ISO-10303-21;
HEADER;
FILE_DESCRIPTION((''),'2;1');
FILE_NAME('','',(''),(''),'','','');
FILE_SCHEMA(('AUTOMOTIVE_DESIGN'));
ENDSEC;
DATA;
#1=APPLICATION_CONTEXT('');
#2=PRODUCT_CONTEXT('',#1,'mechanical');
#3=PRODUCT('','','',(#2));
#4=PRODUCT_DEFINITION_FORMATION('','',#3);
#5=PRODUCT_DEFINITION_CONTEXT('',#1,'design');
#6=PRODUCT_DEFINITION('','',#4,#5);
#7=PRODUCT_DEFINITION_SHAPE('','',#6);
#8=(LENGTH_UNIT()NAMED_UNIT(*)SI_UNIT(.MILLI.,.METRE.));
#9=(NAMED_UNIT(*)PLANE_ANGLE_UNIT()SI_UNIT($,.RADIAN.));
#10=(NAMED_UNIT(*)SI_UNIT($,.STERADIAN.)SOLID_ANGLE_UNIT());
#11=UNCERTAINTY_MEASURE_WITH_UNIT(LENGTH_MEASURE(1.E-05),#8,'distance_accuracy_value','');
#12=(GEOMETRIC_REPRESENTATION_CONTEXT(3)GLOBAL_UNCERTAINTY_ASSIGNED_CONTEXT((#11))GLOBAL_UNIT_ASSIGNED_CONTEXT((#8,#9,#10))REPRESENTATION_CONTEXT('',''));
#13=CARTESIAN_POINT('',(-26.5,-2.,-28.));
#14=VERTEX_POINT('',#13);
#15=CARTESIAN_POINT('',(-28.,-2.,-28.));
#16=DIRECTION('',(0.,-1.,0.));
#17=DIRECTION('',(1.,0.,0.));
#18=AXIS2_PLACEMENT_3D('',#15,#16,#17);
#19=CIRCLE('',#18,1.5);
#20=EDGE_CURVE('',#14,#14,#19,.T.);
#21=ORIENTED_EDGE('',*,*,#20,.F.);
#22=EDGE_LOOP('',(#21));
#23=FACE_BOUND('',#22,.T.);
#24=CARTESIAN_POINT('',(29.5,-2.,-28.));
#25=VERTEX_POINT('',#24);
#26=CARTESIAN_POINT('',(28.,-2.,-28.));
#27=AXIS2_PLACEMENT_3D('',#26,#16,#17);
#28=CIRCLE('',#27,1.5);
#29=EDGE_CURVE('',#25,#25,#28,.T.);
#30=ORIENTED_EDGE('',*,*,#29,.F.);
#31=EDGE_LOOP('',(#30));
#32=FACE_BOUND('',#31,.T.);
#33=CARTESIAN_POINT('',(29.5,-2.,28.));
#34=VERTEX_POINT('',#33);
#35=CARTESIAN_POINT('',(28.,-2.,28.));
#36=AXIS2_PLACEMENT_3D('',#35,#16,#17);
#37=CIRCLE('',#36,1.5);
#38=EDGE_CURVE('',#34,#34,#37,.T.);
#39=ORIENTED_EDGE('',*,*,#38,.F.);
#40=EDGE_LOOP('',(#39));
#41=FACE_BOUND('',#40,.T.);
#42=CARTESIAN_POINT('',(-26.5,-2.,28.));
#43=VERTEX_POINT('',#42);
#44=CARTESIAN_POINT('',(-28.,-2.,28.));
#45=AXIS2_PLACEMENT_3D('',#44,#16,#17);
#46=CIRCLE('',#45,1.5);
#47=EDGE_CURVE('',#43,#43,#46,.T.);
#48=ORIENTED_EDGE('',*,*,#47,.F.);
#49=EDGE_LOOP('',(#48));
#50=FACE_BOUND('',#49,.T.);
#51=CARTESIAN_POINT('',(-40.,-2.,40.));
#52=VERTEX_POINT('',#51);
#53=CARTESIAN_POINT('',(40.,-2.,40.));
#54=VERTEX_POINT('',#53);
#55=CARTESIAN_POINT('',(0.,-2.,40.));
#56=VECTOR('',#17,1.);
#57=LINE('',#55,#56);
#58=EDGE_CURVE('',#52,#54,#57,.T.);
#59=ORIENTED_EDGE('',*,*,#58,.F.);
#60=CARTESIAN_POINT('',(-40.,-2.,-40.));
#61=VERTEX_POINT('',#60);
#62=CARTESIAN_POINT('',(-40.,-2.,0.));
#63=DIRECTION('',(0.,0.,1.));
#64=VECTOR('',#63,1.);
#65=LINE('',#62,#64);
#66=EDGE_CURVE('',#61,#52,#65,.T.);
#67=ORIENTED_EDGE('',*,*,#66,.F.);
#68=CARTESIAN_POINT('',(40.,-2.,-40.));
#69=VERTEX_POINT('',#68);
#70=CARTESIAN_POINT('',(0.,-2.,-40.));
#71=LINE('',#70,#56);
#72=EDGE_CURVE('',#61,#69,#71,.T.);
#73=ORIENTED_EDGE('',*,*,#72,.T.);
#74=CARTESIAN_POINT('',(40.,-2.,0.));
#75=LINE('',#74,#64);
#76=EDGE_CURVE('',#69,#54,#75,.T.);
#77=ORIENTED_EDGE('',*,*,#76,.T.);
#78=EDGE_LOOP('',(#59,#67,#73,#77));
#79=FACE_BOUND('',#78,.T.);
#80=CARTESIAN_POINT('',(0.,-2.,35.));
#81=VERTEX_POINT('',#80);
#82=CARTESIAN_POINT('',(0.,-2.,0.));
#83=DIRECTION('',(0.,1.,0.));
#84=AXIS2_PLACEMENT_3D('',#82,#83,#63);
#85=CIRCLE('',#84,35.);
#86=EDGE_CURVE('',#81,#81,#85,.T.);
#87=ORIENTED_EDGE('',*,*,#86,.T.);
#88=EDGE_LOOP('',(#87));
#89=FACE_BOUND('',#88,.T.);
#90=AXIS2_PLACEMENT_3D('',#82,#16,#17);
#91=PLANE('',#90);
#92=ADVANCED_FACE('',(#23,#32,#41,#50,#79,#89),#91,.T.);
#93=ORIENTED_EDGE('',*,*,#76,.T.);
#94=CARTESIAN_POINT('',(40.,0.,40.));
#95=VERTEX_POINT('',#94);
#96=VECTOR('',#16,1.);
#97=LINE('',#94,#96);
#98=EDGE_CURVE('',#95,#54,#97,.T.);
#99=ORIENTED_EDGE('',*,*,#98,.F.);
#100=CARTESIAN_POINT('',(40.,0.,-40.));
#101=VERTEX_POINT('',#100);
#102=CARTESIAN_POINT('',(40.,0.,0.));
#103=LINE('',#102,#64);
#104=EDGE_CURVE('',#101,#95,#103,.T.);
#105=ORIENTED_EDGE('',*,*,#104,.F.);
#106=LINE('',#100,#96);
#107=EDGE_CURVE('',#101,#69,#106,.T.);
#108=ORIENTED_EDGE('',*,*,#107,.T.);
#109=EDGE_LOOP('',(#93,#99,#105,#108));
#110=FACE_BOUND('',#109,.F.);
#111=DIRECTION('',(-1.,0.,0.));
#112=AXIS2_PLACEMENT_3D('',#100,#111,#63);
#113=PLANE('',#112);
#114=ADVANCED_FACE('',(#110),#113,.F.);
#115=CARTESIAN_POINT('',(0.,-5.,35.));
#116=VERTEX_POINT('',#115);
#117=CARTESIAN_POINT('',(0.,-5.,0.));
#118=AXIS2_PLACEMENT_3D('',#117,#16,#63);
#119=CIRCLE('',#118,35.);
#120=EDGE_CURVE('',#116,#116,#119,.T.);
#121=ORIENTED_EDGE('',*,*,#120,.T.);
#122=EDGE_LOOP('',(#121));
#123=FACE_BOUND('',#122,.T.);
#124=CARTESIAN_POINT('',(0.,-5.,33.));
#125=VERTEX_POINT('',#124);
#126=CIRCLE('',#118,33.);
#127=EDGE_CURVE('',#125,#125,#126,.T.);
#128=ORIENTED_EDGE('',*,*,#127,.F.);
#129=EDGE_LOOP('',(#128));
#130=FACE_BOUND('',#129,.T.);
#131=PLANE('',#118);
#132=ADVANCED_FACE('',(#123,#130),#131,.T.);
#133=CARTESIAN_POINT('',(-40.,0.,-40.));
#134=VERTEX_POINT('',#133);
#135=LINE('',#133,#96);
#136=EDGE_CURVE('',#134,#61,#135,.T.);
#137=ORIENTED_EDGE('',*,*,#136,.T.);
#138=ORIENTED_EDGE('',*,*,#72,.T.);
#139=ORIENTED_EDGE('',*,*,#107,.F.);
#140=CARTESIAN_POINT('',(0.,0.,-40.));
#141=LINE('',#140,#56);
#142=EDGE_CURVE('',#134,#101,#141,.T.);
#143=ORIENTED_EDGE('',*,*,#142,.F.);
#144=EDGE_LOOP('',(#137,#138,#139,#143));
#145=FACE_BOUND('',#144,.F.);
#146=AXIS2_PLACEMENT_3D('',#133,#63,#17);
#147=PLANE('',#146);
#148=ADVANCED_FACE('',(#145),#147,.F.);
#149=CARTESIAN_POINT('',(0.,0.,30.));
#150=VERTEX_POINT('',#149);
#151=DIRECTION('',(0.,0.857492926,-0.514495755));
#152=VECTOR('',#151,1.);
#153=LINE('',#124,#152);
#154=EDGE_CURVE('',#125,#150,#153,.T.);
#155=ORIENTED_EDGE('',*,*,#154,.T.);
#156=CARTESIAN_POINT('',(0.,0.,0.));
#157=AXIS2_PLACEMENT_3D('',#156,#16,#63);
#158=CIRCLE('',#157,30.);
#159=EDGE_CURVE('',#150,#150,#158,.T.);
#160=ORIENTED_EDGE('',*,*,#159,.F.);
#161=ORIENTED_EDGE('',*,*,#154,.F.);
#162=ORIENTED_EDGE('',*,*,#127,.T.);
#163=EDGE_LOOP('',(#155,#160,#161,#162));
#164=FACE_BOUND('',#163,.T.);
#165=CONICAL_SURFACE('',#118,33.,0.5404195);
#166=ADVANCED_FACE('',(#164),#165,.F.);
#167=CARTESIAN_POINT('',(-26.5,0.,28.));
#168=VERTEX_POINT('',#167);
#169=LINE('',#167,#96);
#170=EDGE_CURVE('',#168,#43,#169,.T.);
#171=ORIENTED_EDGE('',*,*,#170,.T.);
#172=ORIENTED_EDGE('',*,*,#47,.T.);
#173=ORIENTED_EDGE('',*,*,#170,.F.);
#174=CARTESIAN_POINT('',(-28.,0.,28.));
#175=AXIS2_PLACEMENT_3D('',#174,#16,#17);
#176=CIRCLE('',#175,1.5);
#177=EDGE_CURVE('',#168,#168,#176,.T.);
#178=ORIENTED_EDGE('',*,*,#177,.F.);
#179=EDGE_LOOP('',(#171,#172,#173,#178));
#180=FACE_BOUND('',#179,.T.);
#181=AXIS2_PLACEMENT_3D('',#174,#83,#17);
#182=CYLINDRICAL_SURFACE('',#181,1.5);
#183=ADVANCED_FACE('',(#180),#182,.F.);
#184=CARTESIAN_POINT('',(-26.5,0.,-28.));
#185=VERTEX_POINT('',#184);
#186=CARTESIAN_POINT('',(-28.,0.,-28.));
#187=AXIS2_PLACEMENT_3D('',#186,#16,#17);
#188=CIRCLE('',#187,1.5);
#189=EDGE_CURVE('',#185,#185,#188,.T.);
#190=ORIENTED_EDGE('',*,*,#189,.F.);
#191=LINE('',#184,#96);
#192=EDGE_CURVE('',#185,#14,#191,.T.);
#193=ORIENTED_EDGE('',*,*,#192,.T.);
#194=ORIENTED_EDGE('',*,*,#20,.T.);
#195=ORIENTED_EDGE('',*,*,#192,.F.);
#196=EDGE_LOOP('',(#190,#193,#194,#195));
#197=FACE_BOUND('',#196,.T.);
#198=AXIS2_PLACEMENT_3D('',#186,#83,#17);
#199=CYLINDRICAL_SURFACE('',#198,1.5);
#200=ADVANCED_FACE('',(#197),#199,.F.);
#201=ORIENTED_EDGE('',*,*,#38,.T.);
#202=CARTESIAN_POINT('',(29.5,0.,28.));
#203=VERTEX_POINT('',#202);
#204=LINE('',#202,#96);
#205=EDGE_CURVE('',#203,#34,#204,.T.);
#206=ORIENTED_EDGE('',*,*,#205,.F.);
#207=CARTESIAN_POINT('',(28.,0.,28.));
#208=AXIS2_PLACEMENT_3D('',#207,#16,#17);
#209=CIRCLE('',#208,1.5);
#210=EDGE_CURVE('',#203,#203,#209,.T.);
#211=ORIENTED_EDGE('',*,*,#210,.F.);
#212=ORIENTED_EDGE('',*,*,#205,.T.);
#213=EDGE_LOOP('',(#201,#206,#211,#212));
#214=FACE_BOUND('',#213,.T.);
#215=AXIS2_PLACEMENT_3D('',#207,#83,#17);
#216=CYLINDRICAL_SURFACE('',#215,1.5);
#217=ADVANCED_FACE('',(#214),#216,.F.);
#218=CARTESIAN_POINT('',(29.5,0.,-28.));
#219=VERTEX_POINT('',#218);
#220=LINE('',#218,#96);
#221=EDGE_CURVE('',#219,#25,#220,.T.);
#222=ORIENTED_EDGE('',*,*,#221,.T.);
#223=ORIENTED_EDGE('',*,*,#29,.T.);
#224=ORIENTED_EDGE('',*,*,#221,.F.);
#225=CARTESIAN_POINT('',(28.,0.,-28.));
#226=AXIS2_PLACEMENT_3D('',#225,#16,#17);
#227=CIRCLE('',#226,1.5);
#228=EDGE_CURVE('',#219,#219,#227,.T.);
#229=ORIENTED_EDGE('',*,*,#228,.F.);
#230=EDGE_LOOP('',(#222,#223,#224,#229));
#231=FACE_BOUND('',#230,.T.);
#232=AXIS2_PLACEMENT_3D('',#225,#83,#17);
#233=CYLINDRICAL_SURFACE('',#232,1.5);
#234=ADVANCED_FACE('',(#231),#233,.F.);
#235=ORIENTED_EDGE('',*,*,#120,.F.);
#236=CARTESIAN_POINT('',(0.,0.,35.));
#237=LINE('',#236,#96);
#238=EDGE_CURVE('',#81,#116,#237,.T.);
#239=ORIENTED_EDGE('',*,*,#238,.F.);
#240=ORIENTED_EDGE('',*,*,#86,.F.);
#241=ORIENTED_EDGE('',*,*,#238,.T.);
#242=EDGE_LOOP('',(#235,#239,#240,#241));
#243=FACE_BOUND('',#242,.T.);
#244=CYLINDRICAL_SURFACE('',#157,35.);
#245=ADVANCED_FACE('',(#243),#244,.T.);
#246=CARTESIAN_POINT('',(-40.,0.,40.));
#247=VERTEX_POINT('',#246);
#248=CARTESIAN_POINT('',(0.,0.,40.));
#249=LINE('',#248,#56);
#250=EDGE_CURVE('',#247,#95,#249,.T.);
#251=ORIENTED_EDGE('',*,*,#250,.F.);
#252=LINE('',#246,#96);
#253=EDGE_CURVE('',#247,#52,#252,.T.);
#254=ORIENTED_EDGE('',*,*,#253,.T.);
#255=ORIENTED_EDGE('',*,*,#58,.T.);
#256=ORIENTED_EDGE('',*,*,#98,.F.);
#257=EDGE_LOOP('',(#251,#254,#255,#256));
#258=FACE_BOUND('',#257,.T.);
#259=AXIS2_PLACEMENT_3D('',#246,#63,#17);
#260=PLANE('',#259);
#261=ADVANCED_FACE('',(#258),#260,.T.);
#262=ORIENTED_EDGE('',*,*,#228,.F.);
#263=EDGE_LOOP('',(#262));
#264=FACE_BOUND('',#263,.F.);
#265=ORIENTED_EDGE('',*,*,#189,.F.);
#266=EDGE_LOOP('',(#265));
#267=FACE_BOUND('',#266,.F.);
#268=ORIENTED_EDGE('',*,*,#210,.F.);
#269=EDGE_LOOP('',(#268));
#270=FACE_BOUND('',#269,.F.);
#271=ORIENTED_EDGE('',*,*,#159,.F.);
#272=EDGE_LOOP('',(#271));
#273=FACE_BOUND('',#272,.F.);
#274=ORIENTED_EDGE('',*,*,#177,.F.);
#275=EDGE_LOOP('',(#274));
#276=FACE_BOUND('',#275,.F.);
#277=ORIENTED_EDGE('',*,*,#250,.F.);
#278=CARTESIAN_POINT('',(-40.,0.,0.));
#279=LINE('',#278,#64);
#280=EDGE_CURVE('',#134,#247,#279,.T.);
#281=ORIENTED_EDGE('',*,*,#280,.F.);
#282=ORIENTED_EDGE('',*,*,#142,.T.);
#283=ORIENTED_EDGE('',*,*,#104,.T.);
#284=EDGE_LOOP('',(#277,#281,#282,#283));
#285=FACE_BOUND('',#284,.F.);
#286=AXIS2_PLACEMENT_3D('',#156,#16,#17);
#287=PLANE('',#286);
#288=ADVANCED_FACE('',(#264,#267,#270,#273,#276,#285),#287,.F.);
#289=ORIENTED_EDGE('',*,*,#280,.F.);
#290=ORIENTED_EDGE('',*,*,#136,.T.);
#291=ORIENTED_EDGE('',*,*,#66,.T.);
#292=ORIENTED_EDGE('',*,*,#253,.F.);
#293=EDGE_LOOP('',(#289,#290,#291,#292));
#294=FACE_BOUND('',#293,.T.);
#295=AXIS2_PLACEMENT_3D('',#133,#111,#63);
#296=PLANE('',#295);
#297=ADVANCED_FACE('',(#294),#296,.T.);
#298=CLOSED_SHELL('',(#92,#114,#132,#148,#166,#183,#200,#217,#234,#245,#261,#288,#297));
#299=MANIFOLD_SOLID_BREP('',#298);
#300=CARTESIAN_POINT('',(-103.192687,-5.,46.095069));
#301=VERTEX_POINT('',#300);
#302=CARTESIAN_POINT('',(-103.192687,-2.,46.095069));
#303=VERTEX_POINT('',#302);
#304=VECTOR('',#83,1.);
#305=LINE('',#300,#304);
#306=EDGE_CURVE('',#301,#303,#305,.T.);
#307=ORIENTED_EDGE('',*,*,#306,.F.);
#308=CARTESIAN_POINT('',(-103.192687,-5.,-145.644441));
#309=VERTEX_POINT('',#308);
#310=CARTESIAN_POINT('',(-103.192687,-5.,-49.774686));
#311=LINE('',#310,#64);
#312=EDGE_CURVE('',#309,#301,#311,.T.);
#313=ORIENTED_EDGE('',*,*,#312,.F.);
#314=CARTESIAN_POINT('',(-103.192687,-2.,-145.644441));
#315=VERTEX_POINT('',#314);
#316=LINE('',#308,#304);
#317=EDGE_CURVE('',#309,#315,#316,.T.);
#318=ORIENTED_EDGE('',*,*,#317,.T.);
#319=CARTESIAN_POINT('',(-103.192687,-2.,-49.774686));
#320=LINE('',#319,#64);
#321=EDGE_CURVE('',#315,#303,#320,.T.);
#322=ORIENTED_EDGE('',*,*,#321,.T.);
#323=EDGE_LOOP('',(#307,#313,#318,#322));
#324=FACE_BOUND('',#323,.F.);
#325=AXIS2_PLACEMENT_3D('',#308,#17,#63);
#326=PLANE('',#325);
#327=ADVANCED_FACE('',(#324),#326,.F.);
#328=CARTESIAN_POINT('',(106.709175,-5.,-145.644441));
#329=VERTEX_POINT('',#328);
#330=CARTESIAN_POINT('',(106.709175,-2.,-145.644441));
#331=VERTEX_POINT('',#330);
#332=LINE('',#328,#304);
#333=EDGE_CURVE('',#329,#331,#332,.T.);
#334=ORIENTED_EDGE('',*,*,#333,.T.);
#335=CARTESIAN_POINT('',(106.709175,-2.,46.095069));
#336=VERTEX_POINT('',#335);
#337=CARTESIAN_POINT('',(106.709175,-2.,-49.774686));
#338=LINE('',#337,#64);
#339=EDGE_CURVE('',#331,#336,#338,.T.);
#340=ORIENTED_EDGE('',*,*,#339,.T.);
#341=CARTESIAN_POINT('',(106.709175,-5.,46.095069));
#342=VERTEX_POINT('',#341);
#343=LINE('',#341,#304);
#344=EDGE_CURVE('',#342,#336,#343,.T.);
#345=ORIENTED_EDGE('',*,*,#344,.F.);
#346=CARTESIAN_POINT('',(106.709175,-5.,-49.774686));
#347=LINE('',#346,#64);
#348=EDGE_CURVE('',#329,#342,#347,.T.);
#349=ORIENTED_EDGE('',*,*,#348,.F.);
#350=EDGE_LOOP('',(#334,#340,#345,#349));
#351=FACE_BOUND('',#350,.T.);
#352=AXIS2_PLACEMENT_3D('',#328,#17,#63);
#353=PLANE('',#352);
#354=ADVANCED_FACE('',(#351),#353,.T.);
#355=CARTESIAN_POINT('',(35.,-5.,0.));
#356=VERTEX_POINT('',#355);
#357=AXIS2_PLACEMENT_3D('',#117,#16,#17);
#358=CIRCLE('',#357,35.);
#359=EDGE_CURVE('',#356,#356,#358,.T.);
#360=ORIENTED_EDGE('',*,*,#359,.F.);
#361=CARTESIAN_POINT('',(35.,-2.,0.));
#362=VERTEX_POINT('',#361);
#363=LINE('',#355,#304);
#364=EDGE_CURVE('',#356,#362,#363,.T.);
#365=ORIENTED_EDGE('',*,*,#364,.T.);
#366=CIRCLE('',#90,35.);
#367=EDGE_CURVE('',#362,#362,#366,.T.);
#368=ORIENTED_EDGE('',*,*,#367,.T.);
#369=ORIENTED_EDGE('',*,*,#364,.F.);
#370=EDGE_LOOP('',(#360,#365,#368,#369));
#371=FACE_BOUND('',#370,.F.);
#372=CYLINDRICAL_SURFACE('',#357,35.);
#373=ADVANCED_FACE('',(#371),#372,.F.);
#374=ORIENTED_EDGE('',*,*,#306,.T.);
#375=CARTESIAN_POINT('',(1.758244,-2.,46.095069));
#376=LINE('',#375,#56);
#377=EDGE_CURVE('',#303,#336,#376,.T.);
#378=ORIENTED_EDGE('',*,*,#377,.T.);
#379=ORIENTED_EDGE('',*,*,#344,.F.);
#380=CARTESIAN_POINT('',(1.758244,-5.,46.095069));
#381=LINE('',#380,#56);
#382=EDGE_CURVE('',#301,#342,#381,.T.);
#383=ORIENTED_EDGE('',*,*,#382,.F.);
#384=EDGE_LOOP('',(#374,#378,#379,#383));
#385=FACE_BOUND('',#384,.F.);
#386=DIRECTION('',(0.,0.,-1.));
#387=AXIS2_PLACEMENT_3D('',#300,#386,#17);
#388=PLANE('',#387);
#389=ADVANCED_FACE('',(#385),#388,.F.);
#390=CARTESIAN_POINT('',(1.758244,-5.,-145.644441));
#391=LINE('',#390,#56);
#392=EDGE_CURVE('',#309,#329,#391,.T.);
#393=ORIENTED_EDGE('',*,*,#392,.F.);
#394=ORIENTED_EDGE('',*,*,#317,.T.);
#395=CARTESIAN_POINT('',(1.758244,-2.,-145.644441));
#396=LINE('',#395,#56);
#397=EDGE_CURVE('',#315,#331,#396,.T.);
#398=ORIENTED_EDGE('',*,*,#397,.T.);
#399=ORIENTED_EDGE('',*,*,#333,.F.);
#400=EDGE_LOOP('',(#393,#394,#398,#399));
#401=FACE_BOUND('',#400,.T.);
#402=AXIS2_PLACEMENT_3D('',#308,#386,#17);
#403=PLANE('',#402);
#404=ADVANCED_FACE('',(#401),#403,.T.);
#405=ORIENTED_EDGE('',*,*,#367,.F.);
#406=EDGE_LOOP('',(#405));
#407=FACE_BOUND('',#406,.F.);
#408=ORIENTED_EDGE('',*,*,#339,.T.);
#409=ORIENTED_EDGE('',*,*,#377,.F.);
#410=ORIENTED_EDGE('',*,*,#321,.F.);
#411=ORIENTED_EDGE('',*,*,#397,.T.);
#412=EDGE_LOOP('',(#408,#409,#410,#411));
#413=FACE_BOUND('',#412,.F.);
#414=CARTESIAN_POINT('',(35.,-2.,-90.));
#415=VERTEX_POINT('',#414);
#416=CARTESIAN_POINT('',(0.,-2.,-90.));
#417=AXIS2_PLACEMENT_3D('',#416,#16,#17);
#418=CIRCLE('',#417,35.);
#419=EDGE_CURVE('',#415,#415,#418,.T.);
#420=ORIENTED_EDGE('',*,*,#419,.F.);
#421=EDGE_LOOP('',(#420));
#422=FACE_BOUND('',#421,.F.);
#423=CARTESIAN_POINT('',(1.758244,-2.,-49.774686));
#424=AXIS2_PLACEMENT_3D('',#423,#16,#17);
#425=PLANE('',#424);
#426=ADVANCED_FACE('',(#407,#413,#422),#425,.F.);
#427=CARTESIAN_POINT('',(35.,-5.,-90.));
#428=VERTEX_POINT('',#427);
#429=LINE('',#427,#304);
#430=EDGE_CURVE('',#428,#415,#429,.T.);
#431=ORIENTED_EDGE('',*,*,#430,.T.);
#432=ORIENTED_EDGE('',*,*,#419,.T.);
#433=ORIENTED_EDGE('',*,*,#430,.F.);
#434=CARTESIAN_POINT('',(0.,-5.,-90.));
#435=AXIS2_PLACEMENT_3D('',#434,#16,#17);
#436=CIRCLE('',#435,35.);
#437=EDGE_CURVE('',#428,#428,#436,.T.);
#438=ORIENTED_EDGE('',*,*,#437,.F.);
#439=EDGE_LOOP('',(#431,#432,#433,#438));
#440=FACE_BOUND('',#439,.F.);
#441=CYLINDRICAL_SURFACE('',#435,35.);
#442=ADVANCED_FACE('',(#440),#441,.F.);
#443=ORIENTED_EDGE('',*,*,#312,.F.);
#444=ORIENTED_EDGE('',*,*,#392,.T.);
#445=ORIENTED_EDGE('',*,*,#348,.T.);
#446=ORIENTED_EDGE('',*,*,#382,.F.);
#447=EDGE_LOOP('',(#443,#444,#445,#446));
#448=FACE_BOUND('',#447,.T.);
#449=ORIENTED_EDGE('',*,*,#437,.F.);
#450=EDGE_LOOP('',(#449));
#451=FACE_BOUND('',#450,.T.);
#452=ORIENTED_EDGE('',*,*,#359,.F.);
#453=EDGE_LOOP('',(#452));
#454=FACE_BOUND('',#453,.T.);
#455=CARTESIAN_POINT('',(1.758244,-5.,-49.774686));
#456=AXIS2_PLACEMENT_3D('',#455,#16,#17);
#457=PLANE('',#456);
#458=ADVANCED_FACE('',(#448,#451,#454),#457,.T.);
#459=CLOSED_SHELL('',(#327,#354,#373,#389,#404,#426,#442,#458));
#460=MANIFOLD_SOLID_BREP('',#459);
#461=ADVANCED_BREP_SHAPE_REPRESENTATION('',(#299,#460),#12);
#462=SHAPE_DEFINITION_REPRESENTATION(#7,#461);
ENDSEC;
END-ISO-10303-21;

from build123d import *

# Parameters (mm, degrees)
F1_W     = 209.9018618464
F1_H     = 191.7395107448
F1_R     = 35
F2_DEPTH = 3
F5_W     = 80
F5_H     = 80
F5_R     = 1.5
F5_R_2   = 35
F6_DEPTH = 2


with BuildPart() as f2:
    # F1 (on offset) → F2 (new body)
    with BuildSketch(Plane.XZ.offset(5)):
        with Locations((1.7582438886, -49.7746858746)):
            Rectangle(F1_W, F1_H)
        with Locations((0, -90)):
            Circle(F1_R, mode=Mode.SUBTRACT)
        Circle(F1_R, mode=Mode.SUBTRACT)
    extrude(amount=-F2_DEPTH)


with BuildPart() as f4:
    # F3 (on Right) → F4 (revolve)
    with BuildSketch(Plane.YZ):
        Polygon((0, 35), (-5, 35), (-5, 33), (0, 30), align=None)
    revolve(axis=Axis((0, 1.602868408, 0), (0, -1, 0)))

    # F5 (on Front) → F6 (join)
    with BuildSketch(Plane.XZ):
        Rectangle(F5_W, F5_H)
        with Locations((-28, -28)):
            Circle(F5_R, mode=Mode.SUBTRACT)
        with Locations((28, -28)):
            Circle(F5_R, mode=Mode.SUBTRACT)
        with Locations((-28, 28)):
            Circle(F5_R, mode=Mode.SUBTRACT)
        Circle(F5_R_2, mode=Mode.SUBTRACT)
        with Locations((28, 28)):
            Circle(F5_R, mode=Mode.SUBTRACT)
    extrude(amount=F6_DEPTH)


solid = Compound([f2.part, f4.part])
